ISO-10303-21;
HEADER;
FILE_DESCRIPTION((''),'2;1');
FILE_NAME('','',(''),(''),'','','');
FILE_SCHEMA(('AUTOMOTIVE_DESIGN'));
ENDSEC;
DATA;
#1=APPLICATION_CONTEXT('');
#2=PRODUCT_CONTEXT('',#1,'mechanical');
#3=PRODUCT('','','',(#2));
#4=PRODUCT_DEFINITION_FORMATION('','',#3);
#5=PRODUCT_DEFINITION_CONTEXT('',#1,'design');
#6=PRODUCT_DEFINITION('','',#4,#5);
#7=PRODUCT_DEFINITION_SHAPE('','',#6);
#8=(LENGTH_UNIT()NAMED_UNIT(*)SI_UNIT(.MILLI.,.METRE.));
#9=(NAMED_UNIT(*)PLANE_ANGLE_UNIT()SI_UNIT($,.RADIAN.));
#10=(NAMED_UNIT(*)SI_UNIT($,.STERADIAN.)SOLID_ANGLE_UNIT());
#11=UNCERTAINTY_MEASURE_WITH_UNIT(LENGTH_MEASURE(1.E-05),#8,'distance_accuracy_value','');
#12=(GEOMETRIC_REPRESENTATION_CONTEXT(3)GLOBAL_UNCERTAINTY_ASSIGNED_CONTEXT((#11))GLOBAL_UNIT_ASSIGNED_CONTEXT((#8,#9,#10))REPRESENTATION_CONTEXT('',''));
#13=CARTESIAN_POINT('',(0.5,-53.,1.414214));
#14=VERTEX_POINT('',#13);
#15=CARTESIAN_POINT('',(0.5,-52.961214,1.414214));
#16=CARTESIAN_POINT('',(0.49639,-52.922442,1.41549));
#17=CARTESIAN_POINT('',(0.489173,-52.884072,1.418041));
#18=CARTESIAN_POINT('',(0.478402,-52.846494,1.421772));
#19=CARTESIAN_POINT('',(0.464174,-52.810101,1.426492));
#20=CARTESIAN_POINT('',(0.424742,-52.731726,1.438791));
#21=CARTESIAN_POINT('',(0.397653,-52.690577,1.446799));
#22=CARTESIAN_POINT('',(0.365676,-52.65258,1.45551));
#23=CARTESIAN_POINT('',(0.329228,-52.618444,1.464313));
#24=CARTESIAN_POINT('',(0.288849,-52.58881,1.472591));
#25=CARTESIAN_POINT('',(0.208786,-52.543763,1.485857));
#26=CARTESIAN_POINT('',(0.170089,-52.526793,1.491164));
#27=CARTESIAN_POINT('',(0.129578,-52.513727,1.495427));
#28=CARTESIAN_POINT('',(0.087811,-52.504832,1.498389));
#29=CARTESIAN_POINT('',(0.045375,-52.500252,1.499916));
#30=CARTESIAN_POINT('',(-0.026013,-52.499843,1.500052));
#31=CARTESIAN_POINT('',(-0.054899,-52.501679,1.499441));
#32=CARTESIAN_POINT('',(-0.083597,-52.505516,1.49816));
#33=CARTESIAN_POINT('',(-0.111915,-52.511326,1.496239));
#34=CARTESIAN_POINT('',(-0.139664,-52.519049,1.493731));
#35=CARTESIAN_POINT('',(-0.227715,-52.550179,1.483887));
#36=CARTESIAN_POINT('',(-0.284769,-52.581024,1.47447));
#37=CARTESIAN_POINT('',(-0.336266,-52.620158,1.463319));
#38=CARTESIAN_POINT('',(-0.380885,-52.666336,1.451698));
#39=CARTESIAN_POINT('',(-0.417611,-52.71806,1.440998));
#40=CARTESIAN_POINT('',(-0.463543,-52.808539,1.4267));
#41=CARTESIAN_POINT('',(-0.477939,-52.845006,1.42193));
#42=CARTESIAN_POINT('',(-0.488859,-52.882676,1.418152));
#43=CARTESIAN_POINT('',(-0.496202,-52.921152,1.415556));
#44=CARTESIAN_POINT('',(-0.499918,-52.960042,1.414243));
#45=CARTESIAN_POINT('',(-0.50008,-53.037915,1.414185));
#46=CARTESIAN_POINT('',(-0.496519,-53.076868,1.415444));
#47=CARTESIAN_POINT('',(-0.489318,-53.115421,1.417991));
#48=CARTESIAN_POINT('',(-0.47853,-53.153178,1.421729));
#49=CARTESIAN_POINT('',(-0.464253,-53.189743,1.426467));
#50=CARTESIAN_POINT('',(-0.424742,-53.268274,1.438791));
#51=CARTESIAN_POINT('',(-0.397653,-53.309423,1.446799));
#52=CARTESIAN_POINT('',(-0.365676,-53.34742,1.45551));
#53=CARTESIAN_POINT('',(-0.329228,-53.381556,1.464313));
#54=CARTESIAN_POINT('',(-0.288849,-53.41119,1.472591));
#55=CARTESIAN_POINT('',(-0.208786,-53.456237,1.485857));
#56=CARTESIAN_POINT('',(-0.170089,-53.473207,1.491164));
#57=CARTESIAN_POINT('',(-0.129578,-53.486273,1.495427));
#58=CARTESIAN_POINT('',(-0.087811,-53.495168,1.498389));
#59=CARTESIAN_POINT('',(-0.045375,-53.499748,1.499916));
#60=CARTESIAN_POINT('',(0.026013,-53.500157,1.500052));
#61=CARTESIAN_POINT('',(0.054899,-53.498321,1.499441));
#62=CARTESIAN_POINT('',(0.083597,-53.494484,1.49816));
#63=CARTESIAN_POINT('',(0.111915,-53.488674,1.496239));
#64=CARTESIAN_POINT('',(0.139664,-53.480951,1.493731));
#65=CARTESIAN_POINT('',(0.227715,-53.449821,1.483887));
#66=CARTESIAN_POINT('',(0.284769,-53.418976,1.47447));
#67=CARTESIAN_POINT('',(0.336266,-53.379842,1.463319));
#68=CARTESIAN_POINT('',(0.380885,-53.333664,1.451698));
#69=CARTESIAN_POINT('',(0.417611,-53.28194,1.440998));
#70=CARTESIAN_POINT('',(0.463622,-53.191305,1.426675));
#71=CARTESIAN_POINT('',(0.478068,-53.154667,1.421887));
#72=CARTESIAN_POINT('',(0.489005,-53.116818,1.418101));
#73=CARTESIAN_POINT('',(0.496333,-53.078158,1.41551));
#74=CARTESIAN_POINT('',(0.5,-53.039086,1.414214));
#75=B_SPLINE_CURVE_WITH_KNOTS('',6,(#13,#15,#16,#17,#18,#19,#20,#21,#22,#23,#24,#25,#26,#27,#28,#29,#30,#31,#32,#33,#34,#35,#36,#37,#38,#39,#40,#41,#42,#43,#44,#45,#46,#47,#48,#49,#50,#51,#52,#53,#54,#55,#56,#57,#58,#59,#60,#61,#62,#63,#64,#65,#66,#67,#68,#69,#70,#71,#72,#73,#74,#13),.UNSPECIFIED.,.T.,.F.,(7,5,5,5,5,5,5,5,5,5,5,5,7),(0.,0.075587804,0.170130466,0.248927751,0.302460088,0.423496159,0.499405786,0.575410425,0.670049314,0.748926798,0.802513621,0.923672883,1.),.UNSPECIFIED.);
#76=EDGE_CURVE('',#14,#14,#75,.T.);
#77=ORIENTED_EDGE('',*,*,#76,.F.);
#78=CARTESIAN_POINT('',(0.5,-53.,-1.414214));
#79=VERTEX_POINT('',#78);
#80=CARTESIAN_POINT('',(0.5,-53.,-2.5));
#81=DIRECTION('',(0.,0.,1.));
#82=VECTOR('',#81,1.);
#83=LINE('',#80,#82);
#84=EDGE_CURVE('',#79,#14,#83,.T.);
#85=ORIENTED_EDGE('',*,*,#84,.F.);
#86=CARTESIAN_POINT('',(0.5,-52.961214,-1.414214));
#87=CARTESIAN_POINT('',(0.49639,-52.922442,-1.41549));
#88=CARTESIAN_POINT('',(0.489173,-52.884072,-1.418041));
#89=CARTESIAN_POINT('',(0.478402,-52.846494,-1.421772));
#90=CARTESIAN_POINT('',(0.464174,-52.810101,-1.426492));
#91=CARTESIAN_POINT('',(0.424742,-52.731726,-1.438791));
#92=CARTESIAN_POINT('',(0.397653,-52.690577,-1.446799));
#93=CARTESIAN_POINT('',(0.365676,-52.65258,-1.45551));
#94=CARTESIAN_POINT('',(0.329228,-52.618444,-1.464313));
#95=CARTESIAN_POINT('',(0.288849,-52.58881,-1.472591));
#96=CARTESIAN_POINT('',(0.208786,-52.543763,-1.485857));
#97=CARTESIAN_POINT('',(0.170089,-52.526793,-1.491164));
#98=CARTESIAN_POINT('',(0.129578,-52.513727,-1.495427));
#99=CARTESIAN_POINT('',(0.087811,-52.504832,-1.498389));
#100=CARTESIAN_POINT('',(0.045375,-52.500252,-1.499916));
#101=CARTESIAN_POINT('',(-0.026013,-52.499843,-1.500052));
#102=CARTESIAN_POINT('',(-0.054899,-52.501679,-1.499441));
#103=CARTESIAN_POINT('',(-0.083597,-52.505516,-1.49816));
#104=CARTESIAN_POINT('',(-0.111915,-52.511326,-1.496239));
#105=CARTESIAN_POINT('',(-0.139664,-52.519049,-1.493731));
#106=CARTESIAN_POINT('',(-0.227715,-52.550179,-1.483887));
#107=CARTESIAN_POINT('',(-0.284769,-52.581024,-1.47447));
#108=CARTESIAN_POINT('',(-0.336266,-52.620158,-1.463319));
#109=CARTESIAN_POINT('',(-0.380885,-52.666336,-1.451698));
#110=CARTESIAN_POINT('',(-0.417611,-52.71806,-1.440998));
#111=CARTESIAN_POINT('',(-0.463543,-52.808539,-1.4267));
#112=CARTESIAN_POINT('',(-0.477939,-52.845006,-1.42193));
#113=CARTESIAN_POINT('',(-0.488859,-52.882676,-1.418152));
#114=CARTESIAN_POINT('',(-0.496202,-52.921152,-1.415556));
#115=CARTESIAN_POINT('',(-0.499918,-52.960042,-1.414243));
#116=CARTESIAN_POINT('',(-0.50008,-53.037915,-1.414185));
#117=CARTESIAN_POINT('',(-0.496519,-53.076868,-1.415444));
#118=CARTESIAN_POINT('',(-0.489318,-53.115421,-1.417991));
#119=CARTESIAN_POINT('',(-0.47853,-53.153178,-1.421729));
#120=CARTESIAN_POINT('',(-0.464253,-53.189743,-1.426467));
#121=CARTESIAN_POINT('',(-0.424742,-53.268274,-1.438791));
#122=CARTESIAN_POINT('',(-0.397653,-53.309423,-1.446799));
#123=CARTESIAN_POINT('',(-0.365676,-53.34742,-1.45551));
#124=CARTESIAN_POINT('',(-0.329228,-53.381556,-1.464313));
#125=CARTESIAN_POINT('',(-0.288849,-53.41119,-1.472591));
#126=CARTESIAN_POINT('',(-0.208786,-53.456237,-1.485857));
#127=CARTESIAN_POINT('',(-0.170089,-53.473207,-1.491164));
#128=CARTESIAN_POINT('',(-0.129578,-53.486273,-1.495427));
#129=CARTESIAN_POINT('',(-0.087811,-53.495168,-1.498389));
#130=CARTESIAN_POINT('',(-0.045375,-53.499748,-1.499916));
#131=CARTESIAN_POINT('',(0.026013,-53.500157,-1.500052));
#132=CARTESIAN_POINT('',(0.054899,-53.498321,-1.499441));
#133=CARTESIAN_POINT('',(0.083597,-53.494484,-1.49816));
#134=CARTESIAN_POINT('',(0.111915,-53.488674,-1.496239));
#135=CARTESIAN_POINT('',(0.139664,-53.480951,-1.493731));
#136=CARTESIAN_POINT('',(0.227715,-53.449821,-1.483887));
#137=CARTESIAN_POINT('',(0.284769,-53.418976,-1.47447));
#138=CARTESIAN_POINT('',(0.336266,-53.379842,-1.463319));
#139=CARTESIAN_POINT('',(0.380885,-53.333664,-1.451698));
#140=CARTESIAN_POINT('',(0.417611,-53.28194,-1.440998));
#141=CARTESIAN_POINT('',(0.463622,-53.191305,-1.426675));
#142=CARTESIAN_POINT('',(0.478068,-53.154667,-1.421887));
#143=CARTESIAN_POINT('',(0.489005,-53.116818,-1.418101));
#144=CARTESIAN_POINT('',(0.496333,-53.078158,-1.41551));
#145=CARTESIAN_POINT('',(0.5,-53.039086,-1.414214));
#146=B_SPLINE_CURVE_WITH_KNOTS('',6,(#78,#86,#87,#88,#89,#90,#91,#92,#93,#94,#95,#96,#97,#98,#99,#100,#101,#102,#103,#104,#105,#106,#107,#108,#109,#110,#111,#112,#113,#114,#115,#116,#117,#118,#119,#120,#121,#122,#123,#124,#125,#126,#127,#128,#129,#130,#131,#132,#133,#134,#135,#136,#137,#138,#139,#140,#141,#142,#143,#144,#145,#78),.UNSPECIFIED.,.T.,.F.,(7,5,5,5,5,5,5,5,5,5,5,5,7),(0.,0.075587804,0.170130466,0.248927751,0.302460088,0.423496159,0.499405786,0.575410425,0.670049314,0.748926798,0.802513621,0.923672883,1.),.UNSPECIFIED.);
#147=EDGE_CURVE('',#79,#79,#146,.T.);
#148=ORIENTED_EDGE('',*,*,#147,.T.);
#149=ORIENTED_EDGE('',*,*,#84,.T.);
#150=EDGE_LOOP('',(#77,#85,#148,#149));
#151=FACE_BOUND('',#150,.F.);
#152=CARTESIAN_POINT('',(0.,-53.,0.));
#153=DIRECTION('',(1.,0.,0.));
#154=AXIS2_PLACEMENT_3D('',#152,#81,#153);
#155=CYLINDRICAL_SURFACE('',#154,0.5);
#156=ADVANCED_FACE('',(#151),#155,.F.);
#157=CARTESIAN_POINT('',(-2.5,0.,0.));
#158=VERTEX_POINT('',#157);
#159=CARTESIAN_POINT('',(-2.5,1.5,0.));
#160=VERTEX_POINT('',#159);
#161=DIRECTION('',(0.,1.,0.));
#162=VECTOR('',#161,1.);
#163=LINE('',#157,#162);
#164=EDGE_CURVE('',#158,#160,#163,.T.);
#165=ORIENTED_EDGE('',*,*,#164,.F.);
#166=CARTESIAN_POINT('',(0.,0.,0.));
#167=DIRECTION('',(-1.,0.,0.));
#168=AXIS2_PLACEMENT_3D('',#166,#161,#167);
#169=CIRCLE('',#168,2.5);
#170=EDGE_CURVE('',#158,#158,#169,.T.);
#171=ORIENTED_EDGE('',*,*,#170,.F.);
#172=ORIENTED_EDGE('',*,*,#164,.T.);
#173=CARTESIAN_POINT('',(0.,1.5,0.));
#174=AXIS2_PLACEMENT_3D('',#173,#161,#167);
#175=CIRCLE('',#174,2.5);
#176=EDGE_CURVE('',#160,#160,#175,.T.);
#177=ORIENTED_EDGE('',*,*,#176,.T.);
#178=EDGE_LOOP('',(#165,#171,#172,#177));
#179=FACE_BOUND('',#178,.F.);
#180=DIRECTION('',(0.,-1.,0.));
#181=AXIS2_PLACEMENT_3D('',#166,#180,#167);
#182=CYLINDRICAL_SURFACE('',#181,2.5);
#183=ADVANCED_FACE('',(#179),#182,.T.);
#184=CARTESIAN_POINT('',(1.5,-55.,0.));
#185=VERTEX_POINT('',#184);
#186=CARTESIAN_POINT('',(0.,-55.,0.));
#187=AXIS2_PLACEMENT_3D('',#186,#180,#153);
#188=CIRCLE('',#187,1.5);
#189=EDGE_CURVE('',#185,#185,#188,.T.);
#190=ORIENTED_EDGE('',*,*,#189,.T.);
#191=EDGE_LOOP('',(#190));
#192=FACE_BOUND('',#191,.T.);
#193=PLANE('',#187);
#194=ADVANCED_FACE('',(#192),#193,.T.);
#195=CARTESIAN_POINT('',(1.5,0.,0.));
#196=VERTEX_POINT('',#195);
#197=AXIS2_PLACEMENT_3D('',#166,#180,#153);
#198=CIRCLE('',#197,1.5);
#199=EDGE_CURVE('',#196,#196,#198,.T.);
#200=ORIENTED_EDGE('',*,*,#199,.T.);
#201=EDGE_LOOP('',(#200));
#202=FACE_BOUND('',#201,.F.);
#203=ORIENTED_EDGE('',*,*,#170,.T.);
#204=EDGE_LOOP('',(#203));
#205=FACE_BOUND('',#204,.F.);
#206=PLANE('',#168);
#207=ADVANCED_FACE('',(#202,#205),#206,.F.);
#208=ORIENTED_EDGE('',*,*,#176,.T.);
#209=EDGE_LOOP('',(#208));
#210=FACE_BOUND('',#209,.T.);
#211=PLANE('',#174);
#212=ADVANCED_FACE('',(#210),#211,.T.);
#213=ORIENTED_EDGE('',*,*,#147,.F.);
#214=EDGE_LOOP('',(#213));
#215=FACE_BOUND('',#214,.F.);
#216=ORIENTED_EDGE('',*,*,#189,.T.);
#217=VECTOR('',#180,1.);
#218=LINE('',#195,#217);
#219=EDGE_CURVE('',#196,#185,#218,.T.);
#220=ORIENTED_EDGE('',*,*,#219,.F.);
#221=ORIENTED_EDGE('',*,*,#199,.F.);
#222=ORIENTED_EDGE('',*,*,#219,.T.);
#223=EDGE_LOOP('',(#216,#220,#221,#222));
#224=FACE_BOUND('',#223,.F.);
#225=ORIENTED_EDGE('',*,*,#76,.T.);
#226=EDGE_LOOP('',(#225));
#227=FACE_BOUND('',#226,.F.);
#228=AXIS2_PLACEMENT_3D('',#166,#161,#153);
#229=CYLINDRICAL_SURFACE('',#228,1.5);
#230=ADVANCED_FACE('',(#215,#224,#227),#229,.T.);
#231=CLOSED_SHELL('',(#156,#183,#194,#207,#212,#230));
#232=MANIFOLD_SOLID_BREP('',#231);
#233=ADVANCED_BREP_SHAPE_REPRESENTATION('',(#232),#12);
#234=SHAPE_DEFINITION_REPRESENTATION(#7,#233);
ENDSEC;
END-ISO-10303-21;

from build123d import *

# Parameters (mm, degrees)
F0_R     = 1.5
F1_DEPTH = 55
F2_R     = 2.5
F2_R_2   = 1.5
F3_DEPTH = 1.5
F4_R     = 0.5
F5_DEPTH = 2.5


with BuildPart() as f1:
    # F0 (on Front) → F1 (new body)
    with BuildSketch(Plane.XZ):
        Circle(F0_R)
    extrude(amount=F1_DEPTH)

    # F2 (on face) → F3 (join)
    with BuildSketch(Plane(origin=(0, 0, 0), x_dir=(-1, 0, 0), z_dir=(0, 1, 0))):
        Circle(F2_R)
        Circle(F2_R_2, mode=Mode.SUBTRACT)
        Circle(F2_R_2)
    extrude(amount=F3_DEPTH)

    # F4 (on Top) → F5 (cut, symmetric)
    with BuildSketch(Plane.XY):
        with Locations((0, -53)):
            Circle(F4_R)
    extrude(amount=F5_DEPTH, both=True, mode=Mode.SUBTRACT)


solid = f1.part
